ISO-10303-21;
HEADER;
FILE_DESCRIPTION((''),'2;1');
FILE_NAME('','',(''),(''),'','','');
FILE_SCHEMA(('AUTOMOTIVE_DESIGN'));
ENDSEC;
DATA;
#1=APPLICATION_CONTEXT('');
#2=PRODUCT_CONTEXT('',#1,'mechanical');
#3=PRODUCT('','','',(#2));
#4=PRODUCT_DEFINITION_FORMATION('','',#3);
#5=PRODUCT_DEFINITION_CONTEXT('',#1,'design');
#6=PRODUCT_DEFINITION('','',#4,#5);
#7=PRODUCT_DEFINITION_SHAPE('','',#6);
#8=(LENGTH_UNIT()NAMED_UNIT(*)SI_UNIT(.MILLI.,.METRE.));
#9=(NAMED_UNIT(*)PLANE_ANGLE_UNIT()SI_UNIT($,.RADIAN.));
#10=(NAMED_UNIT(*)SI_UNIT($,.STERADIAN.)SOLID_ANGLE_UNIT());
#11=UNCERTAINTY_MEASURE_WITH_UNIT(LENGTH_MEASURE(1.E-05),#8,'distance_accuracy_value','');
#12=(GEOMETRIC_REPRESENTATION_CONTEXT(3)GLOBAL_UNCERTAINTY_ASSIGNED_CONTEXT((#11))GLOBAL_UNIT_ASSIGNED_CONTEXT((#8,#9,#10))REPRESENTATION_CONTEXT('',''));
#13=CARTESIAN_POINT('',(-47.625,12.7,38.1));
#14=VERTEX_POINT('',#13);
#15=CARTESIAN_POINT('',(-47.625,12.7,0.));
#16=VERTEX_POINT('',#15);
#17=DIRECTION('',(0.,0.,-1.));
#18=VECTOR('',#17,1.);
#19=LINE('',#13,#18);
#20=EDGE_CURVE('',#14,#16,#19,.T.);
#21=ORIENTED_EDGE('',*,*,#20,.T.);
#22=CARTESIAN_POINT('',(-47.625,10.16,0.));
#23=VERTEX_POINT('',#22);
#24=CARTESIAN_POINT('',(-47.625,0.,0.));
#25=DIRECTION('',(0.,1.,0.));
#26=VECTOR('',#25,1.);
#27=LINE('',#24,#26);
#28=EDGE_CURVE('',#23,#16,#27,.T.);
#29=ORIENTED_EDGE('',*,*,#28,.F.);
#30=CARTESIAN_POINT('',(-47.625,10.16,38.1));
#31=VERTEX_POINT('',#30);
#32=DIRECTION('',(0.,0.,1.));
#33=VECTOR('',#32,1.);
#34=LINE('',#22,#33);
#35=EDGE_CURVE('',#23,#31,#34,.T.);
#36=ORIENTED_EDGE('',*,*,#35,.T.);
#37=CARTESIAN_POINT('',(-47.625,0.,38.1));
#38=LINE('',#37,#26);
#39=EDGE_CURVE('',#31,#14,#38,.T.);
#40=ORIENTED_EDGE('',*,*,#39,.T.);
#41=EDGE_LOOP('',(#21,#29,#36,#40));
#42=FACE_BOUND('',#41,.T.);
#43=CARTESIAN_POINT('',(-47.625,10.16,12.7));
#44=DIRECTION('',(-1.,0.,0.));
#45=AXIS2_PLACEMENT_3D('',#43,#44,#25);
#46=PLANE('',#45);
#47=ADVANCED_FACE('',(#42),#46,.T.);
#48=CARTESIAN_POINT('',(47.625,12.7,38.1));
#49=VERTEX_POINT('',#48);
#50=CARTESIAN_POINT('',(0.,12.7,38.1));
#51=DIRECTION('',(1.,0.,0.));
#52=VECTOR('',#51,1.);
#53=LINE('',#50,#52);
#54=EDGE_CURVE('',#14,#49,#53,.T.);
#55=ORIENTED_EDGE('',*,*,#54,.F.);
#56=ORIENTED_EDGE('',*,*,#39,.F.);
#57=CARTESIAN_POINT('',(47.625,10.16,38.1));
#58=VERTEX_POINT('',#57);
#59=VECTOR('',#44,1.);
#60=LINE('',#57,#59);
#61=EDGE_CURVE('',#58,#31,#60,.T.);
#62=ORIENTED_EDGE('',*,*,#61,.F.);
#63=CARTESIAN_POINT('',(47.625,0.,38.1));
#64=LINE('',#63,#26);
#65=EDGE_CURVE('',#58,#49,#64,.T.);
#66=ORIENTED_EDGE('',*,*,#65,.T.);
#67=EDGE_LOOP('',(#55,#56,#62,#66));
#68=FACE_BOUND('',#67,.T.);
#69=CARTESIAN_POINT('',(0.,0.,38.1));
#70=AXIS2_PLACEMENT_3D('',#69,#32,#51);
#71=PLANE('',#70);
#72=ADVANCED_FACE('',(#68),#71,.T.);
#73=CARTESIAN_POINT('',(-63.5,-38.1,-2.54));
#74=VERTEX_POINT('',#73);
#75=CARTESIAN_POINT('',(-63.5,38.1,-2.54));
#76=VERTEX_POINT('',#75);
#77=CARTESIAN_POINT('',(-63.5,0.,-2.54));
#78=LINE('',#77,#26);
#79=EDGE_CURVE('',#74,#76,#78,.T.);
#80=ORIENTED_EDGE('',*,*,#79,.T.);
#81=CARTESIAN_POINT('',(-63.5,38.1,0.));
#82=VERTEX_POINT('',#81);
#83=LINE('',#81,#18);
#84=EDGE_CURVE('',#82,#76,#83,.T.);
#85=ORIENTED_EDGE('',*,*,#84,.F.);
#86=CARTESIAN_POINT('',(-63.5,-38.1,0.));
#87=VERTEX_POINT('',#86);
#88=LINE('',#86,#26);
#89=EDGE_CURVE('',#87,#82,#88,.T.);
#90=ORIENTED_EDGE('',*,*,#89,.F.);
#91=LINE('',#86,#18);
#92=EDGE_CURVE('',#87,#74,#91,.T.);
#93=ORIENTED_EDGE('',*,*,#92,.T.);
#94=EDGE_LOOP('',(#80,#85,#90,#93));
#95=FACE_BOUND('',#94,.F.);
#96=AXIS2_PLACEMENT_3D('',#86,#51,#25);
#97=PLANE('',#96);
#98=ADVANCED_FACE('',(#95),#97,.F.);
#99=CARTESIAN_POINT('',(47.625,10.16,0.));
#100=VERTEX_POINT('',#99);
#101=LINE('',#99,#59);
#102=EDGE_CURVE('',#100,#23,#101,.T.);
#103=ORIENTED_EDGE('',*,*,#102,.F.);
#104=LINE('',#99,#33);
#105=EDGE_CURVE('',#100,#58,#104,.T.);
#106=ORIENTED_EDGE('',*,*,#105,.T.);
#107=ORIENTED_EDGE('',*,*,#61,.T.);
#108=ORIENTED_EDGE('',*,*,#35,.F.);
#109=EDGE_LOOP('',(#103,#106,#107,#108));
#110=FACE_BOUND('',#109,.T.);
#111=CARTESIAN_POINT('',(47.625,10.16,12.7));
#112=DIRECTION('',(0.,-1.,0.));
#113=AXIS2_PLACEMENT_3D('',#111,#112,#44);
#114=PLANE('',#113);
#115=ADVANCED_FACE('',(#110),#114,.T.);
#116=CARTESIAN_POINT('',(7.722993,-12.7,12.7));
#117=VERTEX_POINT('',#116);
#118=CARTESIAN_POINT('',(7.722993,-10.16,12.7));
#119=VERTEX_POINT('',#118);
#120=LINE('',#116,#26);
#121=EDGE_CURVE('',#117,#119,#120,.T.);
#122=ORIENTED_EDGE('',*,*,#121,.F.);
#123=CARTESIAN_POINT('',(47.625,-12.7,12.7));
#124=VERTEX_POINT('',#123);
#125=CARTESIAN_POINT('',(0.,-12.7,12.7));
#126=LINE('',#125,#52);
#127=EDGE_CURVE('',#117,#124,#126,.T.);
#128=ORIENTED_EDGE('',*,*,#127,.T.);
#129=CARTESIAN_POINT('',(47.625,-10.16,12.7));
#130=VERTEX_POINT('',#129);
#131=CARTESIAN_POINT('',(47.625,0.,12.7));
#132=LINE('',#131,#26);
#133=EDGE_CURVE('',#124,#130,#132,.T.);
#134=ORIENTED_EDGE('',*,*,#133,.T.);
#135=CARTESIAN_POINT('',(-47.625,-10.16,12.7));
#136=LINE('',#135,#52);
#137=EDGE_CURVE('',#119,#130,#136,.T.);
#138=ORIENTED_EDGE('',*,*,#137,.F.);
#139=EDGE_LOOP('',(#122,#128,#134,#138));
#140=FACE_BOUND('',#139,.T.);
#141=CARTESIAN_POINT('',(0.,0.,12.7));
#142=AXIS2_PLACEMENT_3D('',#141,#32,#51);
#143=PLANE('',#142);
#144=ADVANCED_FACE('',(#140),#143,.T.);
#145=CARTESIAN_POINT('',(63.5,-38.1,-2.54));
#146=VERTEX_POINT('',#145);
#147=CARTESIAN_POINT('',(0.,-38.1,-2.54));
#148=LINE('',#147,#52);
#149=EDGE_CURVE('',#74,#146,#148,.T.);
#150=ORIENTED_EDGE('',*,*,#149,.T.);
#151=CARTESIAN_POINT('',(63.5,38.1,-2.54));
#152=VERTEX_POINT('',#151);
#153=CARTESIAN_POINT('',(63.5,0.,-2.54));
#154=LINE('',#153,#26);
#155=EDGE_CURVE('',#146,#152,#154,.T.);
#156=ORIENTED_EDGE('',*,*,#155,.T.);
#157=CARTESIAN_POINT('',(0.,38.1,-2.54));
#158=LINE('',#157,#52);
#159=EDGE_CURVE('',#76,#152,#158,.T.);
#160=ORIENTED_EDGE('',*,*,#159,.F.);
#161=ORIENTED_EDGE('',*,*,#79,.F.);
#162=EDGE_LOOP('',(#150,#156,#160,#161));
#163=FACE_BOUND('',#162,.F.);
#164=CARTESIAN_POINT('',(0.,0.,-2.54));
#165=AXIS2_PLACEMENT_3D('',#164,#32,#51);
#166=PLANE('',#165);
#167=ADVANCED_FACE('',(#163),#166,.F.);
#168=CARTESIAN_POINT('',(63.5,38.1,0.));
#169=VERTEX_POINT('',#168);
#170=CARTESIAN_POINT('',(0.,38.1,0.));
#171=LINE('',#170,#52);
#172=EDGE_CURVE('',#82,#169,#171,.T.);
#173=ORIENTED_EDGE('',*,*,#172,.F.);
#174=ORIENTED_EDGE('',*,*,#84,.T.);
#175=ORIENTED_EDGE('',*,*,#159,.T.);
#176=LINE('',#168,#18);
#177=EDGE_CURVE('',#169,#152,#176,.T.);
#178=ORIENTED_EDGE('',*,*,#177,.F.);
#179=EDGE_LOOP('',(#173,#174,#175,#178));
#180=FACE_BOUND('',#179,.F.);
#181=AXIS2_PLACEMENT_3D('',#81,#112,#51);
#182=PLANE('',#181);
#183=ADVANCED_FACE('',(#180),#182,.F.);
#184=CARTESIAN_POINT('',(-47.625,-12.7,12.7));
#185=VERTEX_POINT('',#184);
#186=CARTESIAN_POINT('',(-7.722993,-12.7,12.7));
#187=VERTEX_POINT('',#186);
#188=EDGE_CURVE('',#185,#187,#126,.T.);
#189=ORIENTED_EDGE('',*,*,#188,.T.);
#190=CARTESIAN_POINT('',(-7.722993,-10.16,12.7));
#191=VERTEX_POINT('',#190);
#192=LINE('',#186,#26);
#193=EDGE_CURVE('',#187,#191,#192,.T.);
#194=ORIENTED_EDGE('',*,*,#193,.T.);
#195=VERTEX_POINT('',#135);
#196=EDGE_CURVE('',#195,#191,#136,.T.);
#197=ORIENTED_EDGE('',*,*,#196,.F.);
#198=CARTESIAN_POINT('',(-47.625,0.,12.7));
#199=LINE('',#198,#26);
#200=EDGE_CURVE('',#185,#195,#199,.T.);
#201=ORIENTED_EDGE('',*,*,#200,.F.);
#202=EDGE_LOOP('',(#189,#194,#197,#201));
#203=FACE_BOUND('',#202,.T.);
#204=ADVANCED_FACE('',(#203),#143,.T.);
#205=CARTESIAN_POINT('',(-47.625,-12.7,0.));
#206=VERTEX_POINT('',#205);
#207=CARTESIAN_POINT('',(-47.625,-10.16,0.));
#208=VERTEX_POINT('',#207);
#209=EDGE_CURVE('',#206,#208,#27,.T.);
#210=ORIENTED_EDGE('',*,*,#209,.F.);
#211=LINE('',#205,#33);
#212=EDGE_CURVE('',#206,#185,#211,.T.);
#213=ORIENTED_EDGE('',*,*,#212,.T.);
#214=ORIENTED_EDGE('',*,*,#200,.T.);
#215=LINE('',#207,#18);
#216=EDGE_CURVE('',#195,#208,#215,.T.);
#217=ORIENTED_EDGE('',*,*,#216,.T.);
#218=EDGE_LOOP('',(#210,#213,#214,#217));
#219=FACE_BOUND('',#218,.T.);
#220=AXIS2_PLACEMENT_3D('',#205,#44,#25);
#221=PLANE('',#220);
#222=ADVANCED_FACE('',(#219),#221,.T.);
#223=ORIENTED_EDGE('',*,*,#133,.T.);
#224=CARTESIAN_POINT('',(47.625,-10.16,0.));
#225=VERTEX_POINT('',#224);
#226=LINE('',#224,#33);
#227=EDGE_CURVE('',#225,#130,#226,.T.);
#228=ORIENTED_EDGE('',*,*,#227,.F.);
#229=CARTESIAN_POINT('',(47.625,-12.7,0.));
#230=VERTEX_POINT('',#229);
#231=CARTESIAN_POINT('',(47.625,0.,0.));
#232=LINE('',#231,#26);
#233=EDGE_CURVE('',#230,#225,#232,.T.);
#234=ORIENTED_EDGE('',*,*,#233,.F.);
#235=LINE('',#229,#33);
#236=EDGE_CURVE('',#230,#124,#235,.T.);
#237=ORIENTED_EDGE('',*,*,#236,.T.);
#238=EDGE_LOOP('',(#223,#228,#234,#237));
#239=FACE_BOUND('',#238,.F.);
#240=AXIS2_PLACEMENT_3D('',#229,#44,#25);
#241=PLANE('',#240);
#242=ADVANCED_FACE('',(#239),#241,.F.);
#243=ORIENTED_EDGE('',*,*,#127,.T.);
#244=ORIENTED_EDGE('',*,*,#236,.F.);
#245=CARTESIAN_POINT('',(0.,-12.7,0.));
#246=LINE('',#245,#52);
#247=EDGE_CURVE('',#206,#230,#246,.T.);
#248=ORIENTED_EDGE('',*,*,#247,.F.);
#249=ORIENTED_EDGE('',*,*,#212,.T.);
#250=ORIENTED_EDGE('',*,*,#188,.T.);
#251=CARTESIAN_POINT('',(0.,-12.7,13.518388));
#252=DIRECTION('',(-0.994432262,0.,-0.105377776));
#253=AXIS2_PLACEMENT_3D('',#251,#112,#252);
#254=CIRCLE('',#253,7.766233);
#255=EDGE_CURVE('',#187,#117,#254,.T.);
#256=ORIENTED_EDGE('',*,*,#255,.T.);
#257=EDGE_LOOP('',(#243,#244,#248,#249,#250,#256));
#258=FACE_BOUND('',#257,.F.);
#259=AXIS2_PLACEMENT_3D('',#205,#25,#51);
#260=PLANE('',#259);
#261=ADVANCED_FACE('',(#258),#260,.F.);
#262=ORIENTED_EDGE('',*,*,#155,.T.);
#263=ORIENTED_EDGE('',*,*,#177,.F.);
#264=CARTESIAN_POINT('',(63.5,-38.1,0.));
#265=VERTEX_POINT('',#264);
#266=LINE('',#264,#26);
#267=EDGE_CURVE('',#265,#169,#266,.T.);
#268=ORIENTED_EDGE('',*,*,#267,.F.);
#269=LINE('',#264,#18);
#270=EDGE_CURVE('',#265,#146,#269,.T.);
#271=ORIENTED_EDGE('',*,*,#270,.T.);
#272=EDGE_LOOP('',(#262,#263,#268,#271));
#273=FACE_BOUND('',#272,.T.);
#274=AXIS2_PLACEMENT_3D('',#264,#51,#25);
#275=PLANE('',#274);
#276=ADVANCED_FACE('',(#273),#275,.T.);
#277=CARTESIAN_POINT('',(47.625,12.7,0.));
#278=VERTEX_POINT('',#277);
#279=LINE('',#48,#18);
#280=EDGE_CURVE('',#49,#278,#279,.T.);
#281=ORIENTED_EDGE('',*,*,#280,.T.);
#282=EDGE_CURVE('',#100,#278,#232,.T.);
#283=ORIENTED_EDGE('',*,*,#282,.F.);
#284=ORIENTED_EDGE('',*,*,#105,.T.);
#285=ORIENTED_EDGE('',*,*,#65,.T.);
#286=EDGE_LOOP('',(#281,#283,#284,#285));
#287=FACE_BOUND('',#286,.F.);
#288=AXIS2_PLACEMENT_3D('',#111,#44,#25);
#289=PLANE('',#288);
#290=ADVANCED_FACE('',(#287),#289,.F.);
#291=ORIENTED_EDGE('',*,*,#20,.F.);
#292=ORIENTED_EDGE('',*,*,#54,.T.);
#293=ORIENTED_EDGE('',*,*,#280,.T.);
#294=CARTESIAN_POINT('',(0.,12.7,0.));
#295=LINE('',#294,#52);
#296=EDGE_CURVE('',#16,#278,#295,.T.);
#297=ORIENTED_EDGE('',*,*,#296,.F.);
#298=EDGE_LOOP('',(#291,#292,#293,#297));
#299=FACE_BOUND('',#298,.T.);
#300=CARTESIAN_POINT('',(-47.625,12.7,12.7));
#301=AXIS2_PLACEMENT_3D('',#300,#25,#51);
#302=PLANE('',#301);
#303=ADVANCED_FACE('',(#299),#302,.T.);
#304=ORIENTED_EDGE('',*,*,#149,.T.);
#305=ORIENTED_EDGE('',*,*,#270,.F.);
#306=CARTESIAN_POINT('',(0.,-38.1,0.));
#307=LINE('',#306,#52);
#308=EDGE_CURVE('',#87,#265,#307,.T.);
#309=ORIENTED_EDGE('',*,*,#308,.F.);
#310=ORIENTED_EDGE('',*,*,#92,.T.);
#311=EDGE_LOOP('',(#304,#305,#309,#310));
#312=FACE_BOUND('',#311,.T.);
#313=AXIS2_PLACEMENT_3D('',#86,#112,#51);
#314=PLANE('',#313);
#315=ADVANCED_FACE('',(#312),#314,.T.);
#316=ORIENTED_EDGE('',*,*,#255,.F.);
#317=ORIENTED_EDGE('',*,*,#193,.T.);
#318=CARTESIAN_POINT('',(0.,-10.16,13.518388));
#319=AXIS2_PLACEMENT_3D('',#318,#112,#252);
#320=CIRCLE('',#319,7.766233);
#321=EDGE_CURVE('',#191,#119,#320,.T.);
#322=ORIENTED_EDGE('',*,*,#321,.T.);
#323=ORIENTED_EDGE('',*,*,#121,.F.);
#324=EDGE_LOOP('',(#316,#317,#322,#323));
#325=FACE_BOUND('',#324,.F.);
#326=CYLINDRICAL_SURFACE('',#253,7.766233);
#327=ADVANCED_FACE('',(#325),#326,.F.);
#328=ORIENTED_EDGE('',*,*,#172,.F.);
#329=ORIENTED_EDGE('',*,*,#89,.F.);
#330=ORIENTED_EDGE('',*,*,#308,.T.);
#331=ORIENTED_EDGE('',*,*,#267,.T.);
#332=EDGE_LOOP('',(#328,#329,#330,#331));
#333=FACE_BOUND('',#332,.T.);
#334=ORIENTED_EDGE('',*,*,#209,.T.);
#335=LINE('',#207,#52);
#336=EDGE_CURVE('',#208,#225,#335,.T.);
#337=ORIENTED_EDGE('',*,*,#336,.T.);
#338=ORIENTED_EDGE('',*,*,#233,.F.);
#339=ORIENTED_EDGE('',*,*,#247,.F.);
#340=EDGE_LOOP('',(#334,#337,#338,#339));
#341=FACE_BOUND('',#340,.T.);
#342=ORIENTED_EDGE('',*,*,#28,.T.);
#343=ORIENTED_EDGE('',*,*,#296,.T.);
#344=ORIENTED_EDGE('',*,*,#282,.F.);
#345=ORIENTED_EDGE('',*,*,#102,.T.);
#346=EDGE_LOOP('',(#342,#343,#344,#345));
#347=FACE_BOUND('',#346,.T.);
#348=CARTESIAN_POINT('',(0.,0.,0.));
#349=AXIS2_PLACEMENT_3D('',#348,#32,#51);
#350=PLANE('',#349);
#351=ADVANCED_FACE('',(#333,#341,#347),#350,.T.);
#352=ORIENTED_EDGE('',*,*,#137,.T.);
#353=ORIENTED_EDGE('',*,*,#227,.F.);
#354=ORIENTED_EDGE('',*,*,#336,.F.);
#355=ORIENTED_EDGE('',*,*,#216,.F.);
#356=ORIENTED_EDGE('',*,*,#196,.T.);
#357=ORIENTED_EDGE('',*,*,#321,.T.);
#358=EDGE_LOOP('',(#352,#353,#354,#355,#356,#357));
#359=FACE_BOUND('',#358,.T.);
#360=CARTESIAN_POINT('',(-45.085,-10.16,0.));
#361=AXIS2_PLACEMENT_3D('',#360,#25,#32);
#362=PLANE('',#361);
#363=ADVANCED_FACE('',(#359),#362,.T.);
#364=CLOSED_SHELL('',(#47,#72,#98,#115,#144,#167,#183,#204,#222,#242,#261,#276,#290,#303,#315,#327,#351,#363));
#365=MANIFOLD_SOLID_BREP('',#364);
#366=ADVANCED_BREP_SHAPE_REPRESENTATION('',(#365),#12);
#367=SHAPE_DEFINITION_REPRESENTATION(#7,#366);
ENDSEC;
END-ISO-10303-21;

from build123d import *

# Parameters (mm, degrees)
F0_W        = 95.25
F0_H        = 25.4
F1_DEPTH    = 12.7
F2_W        = 127
F2_H        = 76.2
F3_DEPTH    = 2.54
F4_T        = 2.54
F4_T3_DEPTH = 100.33
F4_T5_DEPTH = 30.48
F5_DEPTH    = 25.4
F6_DEPTH    = 25.4
F7_DEPTH    = 25.4
F10_DEPTH   = 5.08


# Not quite as in the source:
# - a shell that OpenCascade refuses in one call is made with other operations: the cavity is built on its own and cut out


with BuildPart() as f1:
    # F0 (on Top) → F1 (new body)
    with BuildSketch(Plane.XY):
        Rectangle(F0_W, F0_H)
    extrude(amount=F1_DEPTH)

    # F2 (on Top) → F3 (join)
    with BuildSketch(Plane.XY):
        Rectangle(F2_W, F2_H)
    extrude(amount=-F3_DEPTH)

    # F4: shell of thickness 2.54, made by hand


with BuildPart() as f4_core1:
    # F4_t2: copy of F1
    add(f1.part)

    # the walls: a layer under each face that stays
    f4_faces = [f4_core1.faces().sort_by_distance(p)[0] for p in [
        (63.5, 0, -1.27),
        (0, -38.1, -1.27),
        (0, 38.1, -1.27),
        (-42.3333333333, -25.4, 0),
        (0, 0, -2.54),
        (-63.5, 0, -1.27),
        (0, -12.7, 6.35),
        (47.625, 0, 6.35),
        (0, 12.7, 6.35),
        (-47.625, 0, 6.35),
    ]]
    thicken(f4_faces, amount=-F4_T, mode=Mode.SUBTRACT)

    # F4_s4 → F4_t3 (cut)
    with BuildSketch(Plane.YZ.offset(-50.165)):
        Polygon((-12.7254, 0.0254), (-12.7, -2.54), (-10.16, -2.54), (-10.16, 0), align=None)
        Polygon((12.7254, 0.0254), (12.7, -2.54), (10.16, -2.54), (10.16, 0), align=None)
    extrude(amount=F4_T3_DEPTH, mode=Mode.SUBTRACT)

    # F4_s6 → F4_t5 (cut)
    with BuildSketch(Plane.XZ.offset(-15.24)):
        Polygon((47.6504, 0.0254), (47.625, -2.54), (45.085, -2.54), (45.085, 0), align=None)
        Polygon((-47.6504, 0.0254), (-47.625, -2.54), (-45.085, -2.54), (-45.085, 0), align=None)
    extrude(amount=F4_T5_DEPTH, mode=Mode.SUBTRACT)


with BuildPart() as f1_1:
    add(f1.part)

    # what is left inside the walls is the cavity
    f4_cavity = [f4_core1.part.solids().sort_by_distance(p)[0] for p in [
        (0, -3.386667, 0.0254),
    ]]
    add(f4_cavity, mode=Mode.SUBTRACT)

    # F5 (cut): a face of the model
    f5_faces = [f1_1.faces().sort_by_distance(p)[0] for p in [
        (-45.085, 0, 6.35),
    ]]
    extrude(f5_faces, amount=-F5_DEPTH, mode=Mode.SUBTRACT)

    # F6 (cut): a face of the model
    f6_faces = [f1_1.faces().sort_by_distance(p)[0] for p in [
        (45.085, 0, 6.35),
    ]]
    extrude(f6_faces, amount=-F6_DEPTH, mode=Mode.SUBTRACT)

    # F7 (add): a face of the model
    f7_faces = [f1_1.faces().sort_by_distance(p)[0] for p in [
        (0, 11.43, 12.7),
    ]]
    extrude(f7_faces, amount=F7_DEPTH)

    # F9 (on face) → F10 (cut)
    with BuildSketch(Plane.XZ.offset(12.7)):
        with BuildLine():
            ThreePointArc((7.7229928646, 12.7), (7.7554155926, 13.1086234281), (7.7662332139, 13.5183883831))
            ThreePointArc((7.7662332139, 13.5183883831), (-0.409764955, 21.2738039757), (-7.7229928646, 12.7))
            Line((-7.7229928646, 12.7), (7.7229928646, 12.7))
        make_face()
        with BuildLine():
            Line((7.7229928646, 12.7), (-7.7229928646, 12.7))
            ThreePointArc((-7.7229928646, 12.7), (0, 5.7521551692), (7.7229928646, 12.7))
        make_face()
    extrude(amount=-F10_DEPTH, mode=Mode.SUBTRACT)


solid = f1_1.part
